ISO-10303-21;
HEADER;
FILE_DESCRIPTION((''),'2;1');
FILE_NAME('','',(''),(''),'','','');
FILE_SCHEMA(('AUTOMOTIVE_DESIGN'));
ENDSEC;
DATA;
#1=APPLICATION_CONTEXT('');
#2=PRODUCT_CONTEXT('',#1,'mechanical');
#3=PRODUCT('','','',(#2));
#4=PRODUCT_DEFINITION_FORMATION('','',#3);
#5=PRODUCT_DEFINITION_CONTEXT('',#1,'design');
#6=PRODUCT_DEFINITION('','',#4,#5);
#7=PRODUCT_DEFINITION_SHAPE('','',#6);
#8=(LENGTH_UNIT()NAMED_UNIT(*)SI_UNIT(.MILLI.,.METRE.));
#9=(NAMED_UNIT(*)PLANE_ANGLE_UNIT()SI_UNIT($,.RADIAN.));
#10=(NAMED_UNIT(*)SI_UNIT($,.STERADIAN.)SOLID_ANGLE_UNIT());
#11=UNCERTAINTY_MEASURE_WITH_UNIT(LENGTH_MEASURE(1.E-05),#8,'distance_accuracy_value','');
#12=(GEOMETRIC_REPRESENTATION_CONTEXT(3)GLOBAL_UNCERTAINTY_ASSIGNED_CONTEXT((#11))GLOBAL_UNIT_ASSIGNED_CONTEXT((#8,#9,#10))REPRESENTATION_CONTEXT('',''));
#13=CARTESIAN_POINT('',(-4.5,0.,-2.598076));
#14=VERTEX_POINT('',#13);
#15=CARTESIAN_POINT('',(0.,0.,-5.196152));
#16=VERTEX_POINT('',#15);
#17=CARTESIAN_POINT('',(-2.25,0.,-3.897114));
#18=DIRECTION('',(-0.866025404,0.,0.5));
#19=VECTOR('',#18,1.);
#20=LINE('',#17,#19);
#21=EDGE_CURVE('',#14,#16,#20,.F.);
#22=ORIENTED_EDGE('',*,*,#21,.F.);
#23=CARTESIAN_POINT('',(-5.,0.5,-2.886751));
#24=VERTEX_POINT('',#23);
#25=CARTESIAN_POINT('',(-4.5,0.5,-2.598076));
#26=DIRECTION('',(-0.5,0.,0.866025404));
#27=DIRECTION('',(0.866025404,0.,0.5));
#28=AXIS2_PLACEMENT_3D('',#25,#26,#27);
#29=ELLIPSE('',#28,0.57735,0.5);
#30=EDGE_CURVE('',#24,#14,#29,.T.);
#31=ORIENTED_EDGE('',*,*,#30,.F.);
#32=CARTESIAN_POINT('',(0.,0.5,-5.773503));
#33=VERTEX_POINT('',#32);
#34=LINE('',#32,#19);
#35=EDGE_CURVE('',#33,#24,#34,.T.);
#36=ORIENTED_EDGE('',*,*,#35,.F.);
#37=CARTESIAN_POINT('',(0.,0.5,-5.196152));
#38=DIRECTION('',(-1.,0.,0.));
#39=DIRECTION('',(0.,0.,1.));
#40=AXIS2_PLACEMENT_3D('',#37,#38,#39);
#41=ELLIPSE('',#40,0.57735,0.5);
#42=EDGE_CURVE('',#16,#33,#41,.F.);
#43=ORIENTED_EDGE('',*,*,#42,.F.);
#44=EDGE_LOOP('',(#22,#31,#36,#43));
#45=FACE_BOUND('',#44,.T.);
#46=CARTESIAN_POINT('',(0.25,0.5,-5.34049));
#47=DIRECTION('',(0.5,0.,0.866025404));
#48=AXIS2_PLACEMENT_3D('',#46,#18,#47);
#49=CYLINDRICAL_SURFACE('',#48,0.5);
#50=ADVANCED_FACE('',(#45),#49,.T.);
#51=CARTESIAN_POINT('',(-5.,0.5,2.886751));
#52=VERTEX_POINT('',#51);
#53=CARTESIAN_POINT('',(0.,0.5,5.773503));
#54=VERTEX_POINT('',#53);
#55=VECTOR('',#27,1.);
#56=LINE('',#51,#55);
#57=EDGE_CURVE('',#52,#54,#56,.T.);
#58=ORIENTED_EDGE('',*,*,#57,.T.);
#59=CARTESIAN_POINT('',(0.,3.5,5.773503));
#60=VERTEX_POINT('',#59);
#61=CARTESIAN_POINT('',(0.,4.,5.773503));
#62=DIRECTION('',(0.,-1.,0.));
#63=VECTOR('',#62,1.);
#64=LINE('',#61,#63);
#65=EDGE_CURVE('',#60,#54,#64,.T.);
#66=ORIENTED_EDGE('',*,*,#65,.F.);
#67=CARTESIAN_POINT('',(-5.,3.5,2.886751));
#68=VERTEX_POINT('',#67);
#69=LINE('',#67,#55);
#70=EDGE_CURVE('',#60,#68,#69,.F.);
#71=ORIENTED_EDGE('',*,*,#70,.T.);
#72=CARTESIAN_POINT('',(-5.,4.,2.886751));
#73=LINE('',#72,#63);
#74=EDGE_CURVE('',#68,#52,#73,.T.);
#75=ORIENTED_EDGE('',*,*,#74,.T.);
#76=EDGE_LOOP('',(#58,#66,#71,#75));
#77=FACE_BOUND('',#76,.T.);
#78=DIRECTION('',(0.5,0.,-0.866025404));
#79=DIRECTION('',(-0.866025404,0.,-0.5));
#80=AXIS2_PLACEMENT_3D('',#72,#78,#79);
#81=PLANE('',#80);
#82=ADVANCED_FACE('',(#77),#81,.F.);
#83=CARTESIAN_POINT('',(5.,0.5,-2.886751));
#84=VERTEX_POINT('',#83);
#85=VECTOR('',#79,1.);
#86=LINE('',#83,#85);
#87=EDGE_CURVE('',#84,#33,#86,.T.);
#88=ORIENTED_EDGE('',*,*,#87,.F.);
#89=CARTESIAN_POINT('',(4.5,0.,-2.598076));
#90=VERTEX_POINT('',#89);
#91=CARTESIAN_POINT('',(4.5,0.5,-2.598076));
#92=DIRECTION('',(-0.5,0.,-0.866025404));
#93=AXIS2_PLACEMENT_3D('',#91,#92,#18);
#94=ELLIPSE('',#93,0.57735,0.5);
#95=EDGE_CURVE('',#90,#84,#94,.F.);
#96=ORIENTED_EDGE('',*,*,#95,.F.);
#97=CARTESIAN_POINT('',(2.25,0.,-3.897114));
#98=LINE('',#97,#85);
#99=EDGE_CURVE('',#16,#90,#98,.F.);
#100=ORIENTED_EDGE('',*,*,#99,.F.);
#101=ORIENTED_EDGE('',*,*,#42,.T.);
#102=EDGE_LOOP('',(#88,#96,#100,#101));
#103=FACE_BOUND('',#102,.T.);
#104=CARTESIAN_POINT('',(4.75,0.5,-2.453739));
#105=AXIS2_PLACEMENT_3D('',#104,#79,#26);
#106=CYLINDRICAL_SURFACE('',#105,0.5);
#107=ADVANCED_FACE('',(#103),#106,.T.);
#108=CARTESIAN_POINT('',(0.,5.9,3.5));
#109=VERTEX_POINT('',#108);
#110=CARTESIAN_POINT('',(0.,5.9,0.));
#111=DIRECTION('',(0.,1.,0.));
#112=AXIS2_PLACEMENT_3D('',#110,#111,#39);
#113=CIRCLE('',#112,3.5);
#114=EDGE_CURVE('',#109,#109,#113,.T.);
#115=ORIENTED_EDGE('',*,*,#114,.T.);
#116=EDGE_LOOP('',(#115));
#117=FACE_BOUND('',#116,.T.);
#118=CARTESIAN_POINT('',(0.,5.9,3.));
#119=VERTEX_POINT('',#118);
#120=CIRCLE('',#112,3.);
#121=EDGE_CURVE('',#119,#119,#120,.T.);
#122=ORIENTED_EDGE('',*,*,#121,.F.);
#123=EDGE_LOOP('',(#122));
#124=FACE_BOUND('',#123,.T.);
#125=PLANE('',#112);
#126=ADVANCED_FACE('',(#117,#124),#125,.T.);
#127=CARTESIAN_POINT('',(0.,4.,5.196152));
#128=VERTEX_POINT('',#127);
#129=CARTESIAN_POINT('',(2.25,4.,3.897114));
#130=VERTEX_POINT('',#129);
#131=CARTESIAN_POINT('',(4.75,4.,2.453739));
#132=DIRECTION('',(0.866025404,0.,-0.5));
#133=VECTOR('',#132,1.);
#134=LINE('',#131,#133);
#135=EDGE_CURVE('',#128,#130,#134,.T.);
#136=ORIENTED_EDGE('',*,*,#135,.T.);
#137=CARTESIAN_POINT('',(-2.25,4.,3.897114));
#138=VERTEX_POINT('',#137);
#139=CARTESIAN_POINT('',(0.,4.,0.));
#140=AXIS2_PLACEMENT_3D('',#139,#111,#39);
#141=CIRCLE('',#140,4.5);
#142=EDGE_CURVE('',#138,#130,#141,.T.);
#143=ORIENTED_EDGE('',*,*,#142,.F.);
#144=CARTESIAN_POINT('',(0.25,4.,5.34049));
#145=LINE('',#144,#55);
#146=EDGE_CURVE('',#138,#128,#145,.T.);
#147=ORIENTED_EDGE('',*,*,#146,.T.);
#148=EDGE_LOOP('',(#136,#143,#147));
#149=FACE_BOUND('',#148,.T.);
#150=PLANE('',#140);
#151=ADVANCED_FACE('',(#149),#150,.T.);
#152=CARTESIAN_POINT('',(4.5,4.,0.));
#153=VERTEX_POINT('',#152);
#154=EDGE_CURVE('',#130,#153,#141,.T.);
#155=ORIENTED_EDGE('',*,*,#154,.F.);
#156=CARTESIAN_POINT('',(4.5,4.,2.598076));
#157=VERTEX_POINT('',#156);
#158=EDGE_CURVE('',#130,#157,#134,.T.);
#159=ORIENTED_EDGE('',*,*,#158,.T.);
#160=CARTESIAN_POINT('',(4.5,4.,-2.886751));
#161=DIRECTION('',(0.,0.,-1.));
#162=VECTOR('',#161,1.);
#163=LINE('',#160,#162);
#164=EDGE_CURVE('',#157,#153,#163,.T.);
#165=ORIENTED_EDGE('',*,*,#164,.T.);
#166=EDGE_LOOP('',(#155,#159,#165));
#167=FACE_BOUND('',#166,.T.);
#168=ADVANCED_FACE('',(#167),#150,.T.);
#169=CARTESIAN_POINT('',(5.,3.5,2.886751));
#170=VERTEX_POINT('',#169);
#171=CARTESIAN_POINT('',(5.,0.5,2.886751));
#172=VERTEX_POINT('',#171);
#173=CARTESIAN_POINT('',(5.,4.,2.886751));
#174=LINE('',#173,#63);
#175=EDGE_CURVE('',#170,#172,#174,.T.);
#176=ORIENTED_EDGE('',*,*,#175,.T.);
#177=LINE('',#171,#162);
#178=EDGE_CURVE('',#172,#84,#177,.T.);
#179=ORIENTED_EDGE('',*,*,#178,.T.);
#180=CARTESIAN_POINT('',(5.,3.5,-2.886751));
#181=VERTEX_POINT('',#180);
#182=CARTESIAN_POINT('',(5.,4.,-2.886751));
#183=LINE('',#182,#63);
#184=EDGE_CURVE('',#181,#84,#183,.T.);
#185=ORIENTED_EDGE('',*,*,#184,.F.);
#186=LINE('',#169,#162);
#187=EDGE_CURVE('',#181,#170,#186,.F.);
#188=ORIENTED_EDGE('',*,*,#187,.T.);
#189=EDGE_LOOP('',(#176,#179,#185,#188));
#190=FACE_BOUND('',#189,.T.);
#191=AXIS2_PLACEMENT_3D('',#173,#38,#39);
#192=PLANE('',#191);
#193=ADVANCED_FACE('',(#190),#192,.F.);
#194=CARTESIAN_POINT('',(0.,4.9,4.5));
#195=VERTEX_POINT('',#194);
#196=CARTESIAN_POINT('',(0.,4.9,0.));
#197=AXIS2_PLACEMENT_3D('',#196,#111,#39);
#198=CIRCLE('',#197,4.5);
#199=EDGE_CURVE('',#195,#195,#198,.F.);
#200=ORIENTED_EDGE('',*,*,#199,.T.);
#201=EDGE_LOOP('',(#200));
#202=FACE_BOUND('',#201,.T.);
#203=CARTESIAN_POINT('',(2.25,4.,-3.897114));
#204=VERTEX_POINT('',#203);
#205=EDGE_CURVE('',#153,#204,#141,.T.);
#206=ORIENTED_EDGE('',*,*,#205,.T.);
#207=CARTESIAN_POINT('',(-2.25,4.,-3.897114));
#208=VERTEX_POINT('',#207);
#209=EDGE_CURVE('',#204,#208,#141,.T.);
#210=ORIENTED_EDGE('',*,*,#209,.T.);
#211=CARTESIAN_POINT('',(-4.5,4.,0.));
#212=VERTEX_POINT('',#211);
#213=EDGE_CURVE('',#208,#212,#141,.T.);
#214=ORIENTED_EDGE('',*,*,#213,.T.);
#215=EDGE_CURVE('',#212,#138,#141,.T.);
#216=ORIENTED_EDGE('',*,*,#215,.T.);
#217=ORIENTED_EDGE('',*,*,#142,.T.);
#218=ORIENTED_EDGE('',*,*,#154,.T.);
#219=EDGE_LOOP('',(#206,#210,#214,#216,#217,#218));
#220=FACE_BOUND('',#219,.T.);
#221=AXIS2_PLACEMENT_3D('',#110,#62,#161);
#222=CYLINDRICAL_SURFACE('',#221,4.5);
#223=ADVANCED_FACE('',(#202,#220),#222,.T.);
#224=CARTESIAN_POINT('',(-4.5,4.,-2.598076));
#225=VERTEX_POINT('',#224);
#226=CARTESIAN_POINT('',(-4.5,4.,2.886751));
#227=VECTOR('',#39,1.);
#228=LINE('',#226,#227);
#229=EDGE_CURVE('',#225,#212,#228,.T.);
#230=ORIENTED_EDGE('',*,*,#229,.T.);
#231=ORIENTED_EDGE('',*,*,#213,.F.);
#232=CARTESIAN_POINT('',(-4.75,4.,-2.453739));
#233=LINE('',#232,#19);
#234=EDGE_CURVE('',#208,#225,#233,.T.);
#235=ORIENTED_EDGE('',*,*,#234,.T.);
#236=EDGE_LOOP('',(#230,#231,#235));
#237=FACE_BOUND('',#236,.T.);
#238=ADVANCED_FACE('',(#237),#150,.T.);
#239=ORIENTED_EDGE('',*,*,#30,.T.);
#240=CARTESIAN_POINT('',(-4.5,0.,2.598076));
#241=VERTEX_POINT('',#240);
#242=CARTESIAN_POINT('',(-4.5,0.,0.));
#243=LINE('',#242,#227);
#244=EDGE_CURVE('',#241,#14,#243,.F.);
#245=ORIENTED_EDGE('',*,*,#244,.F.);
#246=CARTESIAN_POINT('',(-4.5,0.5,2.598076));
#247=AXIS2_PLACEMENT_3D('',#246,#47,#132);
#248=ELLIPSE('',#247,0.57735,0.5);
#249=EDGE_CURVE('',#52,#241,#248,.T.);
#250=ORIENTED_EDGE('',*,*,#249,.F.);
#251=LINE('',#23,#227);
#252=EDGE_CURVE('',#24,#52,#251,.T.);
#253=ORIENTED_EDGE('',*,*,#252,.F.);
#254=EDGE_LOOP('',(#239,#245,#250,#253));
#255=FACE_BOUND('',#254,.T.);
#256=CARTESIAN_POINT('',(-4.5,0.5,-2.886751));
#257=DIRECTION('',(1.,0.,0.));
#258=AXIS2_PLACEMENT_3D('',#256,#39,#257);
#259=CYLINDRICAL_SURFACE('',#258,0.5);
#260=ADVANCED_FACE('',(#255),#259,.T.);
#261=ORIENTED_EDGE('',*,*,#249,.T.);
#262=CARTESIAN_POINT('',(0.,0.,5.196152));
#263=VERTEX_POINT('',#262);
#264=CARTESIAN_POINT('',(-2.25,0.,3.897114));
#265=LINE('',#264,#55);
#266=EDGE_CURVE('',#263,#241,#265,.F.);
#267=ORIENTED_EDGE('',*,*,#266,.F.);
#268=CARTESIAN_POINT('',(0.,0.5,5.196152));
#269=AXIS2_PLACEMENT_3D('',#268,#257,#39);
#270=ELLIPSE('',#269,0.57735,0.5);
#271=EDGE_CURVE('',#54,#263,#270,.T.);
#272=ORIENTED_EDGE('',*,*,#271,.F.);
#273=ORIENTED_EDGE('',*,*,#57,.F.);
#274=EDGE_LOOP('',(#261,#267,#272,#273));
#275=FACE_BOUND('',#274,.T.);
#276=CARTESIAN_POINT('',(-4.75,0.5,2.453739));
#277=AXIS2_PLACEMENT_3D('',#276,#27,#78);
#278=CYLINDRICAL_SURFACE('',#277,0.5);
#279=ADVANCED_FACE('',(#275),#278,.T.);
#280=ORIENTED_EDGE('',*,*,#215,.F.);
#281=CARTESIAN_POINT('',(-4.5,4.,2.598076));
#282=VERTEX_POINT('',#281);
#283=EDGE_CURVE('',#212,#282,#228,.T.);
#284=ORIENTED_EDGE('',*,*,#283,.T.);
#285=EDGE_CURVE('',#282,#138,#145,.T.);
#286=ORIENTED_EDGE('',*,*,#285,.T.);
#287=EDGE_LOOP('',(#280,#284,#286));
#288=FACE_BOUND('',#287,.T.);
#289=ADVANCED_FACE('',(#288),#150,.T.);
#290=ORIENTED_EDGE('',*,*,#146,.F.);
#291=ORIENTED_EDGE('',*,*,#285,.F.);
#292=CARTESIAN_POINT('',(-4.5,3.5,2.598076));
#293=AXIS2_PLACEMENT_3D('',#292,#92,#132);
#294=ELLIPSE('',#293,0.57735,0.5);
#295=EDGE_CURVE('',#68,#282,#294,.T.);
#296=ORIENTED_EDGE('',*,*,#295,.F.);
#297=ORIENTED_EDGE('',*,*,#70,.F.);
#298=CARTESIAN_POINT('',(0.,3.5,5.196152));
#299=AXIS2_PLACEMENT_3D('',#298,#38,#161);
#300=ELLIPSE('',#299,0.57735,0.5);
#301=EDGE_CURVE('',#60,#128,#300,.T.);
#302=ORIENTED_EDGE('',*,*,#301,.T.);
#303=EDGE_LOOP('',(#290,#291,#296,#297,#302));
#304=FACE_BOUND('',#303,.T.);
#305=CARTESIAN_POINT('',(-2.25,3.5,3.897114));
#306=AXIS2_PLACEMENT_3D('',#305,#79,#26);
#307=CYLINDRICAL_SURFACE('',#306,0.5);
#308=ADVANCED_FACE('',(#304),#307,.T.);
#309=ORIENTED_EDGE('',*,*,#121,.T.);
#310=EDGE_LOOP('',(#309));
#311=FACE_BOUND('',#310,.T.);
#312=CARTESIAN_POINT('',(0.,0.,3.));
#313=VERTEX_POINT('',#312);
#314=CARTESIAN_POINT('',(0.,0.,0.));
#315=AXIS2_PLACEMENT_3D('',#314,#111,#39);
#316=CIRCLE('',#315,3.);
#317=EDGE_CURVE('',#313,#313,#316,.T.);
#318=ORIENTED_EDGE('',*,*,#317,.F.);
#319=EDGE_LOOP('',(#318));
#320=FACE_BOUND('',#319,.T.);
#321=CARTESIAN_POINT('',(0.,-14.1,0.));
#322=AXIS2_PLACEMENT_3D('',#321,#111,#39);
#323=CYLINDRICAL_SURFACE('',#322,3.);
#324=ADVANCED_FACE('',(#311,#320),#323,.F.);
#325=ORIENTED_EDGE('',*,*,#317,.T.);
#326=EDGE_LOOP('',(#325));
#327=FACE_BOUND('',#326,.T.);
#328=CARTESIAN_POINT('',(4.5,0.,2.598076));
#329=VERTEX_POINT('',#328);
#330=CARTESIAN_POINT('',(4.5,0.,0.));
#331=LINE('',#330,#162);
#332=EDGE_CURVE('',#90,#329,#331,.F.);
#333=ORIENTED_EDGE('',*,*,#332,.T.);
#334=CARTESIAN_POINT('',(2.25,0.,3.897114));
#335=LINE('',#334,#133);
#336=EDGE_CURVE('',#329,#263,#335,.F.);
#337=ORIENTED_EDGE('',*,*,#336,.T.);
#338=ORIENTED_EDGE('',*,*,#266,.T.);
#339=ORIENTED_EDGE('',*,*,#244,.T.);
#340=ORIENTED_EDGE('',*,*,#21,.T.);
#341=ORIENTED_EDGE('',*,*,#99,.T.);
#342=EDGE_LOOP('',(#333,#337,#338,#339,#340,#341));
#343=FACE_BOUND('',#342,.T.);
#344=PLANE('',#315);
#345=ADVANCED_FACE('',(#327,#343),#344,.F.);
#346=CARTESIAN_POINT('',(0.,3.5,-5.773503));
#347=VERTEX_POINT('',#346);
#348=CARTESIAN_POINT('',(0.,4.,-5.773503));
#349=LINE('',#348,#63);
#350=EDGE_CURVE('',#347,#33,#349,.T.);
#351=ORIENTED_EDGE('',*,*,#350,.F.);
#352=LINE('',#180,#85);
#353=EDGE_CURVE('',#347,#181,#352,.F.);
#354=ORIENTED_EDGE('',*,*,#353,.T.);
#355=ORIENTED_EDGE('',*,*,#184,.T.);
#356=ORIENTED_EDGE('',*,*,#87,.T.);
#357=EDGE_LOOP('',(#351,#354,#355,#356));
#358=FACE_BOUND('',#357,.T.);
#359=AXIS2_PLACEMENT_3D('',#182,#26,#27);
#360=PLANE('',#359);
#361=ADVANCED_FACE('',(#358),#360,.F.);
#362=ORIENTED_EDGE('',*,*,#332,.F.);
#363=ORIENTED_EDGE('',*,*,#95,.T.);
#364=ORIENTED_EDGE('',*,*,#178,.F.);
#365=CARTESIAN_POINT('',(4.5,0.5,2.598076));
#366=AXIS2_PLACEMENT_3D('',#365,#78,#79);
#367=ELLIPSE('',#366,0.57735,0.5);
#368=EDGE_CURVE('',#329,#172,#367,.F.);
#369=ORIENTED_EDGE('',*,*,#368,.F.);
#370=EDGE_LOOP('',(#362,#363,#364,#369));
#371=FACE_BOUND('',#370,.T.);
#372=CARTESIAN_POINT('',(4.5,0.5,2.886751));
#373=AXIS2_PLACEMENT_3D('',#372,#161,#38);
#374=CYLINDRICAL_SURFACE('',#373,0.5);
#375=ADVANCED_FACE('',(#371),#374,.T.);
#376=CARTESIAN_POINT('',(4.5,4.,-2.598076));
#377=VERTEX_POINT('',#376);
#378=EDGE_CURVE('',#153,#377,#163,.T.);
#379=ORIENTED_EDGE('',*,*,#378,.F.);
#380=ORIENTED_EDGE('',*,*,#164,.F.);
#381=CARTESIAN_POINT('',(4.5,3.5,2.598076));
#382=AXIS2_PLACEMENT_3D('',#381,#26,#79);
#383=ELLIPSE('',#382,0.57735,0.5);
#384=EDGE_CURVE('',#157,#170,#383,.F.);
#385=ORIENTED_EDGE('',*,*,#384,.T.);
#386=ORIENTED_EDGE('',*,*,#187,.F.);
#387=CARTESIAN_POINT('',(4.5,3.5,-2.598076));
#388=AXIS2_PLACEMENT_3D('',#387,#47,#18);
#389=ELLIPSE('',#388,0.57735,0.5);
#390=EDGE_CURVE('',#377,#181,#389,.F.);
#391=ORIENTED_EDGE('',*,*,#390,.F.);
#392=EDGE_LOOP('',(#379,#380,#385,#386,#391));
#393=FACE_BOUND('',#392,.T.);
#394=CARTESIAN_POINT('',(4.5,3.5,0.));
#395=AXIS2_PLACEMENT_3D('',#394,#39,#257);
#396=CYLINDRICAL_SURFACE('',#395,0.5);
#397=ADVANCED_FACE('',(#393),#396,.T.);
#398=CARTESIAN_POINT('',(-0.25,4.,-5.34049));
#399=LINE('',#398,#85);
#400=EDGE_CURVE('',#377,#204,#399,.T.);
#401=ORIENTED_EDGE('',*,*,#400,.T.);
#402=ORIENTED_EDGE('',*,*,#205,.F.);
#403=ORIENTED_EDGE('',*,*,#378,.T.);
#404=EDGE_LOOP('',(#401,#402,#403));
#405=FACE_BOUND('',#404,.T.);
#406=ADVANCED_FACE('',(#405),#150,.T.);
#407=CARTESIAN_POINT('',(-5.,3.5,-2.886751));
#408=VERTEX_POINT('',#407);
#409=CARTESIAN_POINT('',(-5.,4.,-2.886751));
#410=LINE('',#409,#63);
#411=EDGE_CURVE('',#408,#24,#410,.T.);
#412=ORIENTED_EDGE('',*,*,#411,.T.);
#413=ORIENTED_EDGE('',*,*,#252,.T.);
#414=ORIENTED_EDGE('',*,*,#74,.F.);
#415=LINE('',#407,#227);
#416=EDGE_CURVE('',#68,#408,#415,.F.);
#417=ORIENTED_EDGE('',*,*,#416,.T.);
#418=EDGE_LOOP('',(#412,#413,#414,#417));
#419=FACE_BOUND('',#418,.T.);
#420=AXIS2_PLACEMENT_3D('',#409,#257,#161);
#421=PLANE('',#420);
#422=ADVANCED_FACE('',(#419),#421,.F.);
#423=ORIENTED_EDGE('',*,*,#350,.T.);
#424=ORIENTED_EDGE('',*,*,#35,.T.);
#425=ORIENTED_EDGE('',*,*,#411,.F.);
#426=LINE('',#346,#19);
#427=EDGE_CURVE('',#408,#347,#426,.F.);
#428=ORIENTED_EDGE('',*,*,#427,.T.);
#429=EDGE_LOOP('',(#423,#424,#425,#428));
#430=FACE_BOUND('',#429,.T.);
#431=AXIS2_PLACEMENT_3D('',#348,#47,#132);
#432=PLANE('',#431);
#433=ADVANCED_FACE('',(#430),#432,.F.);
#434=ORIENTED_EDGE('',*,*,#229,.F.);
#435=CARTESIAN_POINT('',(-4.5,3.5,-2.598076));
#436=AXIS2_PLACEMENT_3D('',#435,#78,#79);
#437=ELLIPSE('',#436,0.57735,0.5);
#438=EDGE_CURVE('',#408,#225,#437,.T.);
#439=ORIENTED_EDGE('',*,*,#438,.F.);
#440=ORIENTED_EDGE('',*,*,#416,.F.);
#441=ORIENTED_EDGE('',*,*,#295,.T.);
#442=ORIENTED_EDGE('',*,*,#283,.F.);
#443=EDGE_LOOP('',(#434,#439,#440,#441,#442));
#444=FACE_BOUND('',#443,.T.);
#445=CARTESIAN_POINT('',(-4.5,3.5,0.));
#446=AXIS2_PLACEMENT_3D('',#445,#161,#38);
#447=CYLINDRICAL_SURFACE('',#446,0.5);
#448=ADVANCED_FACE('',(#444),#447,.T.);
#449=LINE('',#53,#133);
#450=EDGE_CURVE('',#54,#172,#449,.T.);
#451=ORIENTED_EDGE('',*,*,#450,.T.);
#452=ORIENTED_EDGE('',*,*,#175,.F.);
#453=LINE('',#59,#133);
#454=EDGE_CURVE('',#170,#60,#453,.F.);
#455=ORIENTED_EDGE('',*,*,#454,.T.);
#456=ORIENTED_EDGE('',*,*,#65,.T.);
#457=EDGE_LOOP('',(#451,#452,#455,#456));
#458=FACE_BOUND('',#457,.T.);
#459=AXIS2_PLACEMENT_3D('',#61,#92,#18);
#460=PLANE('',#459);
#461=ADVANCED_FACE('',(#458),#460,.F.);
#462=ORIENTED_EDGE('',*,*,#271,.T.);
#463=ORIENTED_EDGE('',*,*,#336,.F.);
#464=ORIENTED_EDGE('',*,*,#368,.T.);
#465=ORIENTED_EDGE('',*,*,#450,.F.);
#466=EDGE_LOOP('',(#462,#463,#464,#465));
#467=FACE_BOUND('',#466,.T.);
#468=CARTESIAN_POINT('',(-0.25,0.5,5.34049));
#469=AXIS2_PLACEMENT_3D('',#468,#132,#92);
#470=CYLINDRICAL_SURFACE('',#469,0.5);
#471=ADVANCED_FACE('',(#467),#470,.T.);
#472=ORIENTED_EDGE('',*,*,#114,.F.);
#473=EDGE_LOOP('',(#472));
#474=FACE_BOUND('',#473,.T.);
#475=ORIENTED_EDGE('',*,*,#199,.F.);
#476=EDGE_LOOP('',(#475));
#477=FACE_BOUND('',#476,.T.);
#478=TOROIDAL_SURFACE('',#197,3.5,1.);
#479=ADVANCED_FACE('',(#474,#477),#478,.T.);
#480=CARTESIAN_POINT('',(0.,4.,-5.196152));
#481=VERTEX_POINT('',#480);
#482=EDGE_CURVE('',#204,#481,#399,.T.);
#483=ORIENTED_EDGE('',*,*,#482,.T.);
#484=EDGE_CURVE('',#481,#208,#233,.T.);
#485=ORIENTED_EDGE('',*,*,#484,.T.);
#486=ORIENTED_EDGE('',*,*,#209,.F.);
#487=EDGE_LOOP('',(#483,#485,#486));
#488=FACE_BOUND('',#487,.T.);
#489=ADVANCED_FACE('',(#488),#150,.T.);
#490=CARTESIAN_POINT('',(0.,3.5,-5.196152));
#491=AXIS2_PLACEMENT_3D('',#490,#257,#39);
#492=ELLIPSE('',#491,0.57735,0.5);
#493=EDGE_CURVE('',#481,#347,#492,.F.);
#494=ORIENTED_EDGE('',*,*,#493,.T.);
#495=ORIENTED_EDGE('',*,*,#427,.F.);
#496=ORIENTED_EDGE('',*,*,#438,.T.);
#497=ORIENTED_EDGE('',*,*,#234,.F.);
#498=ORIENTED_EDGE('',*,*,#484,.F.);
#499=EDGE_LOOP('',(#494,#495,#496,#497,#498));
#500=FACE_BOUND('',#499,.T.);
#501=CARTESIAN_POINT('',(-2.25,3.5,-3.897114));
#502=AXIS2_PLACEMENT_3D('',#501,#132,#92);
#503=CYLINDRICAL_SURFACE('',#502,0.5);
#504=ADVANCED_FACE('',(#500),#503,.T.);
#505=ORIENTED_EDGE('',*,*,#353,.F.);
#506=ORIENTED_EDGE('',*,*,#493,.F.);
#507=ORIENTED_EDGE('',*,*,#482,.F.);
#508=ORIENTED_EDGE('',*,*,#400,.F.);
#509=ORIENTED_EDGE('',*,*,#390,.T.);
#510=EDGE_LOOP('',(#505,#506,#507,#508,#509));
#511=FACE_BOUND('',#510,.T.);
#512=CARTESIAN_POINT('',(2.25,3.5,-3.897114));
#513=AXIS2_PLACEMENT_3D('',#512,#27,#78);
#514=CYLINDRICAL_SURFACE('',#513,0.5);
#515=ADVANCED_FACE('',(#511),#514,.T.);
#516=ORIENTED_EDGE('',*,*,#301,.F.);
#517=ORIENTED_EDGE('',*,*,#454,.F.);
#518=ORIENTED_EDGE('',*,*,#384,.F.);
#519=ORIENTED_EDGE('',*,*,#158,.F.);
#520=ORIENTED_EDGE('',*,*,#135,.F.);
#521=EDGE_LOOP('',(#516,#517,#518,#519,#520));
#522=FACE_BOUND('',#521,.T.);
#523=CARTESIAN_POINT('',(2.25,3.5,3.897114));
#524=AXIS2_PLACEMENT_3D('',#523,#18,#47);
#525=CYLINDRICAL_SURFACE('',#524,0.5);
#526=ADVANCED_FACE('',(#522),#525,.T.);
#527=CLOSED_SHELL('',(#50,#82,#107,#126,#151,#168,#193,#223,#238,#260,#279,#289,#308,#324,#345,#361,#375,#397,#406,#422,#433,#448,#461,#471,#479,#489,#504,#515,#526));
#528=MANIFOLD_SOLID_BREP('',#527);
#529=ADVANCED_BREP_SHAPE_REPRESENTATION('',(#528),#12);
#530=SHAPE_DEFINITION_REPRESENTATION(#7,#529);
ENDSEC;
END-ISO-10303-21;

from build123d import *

# Parameters (mm, degrees)
EXTRUDE_1_DEPTH     = 4
SKETCH_2_R          = 4.5
EXTRUDE_2_DEPTH     = 1.9
SKETCH_3_R          = 3
CUT_EXTRUDE_1_DEPTH = 20
FILLET_1_R          = 1
FILLET_3_R          = 0.5


with BuildPart() as part:
    # 草图1 → 凸台-拉伸1 (new body)
    with BuildSketch(Plane(origin=(0, 0, 0), x_dir=(1, 0, 0), z_dir=(0, 1, 0))):
        Polygon((0, -5.773502692), (5, -2.886751346), (5, 2.886751346), (0, 5.773502692), (-5, 2.886751346), (-5, -2.886751346), align=None)
    extrude(amount=EXTRUDE_1_DEPTH)

    # 草图2 → 凸台-拉伸2 (add)
    with BuildSketch(Plane(origin=(0, 4, 0), x_dir=(1, 0, 0), z_dir=(0, 1, 0))):
        with Locations(Location((0, 0, 0), (0, 0, 90))):
            Circle(SKETCH_2_R)
    extrude(amount=EXTRUDE_2_DEPTH)

    # 草图3 → 切除-拉伸1 (cut)
    with BuildSketch(Plane(origin=(0, 5.9, 0), x_dir=(1, 0, 0), z_dir=(0, 1, 0))):
        with Locations(Location((0, 0, 0), (0, 0, 270))):
            Circle(SKETCH_3_R)
    extrude(amount=-CUT_EXTRUDE_1_DEPTH, mode=Mode.SUBTRACT)

    # 圆角1
    fillet_1_edges = [part.edges().sort_by_distance(p)[0] for p in [
        (0, 5.9, 4.5),
    ]]
    fillet(fillet_1_edges, radius=FILLET_1_R)

    # 圆角3
    fillet_3_edges = [part.edges().sort_by_distance(p)[0] for p in [
        (5, 4, 0),
        (2.5, 4, -4.330127019),
        (-2.5, 4, -4.330127019),
        (-5, 4, 0),
        (-2.5, 4, 4.330127019),
        (-5, 0, 0),
        (-2.5, 0, -4.330127019),
        (2.5, 0, -4.330127019),
        (5, 0, 0),
        (2.5, 0, 4.330127019),
        (-2.5, 0, 4.330127019),
        (2.5, 4, 4.330127019),
    ]]
    fillet(fillet_3_edges, radius=FILLET_3_R - 0.0001)  # a hair under: the kernel refuses the full size


solid = part.part
